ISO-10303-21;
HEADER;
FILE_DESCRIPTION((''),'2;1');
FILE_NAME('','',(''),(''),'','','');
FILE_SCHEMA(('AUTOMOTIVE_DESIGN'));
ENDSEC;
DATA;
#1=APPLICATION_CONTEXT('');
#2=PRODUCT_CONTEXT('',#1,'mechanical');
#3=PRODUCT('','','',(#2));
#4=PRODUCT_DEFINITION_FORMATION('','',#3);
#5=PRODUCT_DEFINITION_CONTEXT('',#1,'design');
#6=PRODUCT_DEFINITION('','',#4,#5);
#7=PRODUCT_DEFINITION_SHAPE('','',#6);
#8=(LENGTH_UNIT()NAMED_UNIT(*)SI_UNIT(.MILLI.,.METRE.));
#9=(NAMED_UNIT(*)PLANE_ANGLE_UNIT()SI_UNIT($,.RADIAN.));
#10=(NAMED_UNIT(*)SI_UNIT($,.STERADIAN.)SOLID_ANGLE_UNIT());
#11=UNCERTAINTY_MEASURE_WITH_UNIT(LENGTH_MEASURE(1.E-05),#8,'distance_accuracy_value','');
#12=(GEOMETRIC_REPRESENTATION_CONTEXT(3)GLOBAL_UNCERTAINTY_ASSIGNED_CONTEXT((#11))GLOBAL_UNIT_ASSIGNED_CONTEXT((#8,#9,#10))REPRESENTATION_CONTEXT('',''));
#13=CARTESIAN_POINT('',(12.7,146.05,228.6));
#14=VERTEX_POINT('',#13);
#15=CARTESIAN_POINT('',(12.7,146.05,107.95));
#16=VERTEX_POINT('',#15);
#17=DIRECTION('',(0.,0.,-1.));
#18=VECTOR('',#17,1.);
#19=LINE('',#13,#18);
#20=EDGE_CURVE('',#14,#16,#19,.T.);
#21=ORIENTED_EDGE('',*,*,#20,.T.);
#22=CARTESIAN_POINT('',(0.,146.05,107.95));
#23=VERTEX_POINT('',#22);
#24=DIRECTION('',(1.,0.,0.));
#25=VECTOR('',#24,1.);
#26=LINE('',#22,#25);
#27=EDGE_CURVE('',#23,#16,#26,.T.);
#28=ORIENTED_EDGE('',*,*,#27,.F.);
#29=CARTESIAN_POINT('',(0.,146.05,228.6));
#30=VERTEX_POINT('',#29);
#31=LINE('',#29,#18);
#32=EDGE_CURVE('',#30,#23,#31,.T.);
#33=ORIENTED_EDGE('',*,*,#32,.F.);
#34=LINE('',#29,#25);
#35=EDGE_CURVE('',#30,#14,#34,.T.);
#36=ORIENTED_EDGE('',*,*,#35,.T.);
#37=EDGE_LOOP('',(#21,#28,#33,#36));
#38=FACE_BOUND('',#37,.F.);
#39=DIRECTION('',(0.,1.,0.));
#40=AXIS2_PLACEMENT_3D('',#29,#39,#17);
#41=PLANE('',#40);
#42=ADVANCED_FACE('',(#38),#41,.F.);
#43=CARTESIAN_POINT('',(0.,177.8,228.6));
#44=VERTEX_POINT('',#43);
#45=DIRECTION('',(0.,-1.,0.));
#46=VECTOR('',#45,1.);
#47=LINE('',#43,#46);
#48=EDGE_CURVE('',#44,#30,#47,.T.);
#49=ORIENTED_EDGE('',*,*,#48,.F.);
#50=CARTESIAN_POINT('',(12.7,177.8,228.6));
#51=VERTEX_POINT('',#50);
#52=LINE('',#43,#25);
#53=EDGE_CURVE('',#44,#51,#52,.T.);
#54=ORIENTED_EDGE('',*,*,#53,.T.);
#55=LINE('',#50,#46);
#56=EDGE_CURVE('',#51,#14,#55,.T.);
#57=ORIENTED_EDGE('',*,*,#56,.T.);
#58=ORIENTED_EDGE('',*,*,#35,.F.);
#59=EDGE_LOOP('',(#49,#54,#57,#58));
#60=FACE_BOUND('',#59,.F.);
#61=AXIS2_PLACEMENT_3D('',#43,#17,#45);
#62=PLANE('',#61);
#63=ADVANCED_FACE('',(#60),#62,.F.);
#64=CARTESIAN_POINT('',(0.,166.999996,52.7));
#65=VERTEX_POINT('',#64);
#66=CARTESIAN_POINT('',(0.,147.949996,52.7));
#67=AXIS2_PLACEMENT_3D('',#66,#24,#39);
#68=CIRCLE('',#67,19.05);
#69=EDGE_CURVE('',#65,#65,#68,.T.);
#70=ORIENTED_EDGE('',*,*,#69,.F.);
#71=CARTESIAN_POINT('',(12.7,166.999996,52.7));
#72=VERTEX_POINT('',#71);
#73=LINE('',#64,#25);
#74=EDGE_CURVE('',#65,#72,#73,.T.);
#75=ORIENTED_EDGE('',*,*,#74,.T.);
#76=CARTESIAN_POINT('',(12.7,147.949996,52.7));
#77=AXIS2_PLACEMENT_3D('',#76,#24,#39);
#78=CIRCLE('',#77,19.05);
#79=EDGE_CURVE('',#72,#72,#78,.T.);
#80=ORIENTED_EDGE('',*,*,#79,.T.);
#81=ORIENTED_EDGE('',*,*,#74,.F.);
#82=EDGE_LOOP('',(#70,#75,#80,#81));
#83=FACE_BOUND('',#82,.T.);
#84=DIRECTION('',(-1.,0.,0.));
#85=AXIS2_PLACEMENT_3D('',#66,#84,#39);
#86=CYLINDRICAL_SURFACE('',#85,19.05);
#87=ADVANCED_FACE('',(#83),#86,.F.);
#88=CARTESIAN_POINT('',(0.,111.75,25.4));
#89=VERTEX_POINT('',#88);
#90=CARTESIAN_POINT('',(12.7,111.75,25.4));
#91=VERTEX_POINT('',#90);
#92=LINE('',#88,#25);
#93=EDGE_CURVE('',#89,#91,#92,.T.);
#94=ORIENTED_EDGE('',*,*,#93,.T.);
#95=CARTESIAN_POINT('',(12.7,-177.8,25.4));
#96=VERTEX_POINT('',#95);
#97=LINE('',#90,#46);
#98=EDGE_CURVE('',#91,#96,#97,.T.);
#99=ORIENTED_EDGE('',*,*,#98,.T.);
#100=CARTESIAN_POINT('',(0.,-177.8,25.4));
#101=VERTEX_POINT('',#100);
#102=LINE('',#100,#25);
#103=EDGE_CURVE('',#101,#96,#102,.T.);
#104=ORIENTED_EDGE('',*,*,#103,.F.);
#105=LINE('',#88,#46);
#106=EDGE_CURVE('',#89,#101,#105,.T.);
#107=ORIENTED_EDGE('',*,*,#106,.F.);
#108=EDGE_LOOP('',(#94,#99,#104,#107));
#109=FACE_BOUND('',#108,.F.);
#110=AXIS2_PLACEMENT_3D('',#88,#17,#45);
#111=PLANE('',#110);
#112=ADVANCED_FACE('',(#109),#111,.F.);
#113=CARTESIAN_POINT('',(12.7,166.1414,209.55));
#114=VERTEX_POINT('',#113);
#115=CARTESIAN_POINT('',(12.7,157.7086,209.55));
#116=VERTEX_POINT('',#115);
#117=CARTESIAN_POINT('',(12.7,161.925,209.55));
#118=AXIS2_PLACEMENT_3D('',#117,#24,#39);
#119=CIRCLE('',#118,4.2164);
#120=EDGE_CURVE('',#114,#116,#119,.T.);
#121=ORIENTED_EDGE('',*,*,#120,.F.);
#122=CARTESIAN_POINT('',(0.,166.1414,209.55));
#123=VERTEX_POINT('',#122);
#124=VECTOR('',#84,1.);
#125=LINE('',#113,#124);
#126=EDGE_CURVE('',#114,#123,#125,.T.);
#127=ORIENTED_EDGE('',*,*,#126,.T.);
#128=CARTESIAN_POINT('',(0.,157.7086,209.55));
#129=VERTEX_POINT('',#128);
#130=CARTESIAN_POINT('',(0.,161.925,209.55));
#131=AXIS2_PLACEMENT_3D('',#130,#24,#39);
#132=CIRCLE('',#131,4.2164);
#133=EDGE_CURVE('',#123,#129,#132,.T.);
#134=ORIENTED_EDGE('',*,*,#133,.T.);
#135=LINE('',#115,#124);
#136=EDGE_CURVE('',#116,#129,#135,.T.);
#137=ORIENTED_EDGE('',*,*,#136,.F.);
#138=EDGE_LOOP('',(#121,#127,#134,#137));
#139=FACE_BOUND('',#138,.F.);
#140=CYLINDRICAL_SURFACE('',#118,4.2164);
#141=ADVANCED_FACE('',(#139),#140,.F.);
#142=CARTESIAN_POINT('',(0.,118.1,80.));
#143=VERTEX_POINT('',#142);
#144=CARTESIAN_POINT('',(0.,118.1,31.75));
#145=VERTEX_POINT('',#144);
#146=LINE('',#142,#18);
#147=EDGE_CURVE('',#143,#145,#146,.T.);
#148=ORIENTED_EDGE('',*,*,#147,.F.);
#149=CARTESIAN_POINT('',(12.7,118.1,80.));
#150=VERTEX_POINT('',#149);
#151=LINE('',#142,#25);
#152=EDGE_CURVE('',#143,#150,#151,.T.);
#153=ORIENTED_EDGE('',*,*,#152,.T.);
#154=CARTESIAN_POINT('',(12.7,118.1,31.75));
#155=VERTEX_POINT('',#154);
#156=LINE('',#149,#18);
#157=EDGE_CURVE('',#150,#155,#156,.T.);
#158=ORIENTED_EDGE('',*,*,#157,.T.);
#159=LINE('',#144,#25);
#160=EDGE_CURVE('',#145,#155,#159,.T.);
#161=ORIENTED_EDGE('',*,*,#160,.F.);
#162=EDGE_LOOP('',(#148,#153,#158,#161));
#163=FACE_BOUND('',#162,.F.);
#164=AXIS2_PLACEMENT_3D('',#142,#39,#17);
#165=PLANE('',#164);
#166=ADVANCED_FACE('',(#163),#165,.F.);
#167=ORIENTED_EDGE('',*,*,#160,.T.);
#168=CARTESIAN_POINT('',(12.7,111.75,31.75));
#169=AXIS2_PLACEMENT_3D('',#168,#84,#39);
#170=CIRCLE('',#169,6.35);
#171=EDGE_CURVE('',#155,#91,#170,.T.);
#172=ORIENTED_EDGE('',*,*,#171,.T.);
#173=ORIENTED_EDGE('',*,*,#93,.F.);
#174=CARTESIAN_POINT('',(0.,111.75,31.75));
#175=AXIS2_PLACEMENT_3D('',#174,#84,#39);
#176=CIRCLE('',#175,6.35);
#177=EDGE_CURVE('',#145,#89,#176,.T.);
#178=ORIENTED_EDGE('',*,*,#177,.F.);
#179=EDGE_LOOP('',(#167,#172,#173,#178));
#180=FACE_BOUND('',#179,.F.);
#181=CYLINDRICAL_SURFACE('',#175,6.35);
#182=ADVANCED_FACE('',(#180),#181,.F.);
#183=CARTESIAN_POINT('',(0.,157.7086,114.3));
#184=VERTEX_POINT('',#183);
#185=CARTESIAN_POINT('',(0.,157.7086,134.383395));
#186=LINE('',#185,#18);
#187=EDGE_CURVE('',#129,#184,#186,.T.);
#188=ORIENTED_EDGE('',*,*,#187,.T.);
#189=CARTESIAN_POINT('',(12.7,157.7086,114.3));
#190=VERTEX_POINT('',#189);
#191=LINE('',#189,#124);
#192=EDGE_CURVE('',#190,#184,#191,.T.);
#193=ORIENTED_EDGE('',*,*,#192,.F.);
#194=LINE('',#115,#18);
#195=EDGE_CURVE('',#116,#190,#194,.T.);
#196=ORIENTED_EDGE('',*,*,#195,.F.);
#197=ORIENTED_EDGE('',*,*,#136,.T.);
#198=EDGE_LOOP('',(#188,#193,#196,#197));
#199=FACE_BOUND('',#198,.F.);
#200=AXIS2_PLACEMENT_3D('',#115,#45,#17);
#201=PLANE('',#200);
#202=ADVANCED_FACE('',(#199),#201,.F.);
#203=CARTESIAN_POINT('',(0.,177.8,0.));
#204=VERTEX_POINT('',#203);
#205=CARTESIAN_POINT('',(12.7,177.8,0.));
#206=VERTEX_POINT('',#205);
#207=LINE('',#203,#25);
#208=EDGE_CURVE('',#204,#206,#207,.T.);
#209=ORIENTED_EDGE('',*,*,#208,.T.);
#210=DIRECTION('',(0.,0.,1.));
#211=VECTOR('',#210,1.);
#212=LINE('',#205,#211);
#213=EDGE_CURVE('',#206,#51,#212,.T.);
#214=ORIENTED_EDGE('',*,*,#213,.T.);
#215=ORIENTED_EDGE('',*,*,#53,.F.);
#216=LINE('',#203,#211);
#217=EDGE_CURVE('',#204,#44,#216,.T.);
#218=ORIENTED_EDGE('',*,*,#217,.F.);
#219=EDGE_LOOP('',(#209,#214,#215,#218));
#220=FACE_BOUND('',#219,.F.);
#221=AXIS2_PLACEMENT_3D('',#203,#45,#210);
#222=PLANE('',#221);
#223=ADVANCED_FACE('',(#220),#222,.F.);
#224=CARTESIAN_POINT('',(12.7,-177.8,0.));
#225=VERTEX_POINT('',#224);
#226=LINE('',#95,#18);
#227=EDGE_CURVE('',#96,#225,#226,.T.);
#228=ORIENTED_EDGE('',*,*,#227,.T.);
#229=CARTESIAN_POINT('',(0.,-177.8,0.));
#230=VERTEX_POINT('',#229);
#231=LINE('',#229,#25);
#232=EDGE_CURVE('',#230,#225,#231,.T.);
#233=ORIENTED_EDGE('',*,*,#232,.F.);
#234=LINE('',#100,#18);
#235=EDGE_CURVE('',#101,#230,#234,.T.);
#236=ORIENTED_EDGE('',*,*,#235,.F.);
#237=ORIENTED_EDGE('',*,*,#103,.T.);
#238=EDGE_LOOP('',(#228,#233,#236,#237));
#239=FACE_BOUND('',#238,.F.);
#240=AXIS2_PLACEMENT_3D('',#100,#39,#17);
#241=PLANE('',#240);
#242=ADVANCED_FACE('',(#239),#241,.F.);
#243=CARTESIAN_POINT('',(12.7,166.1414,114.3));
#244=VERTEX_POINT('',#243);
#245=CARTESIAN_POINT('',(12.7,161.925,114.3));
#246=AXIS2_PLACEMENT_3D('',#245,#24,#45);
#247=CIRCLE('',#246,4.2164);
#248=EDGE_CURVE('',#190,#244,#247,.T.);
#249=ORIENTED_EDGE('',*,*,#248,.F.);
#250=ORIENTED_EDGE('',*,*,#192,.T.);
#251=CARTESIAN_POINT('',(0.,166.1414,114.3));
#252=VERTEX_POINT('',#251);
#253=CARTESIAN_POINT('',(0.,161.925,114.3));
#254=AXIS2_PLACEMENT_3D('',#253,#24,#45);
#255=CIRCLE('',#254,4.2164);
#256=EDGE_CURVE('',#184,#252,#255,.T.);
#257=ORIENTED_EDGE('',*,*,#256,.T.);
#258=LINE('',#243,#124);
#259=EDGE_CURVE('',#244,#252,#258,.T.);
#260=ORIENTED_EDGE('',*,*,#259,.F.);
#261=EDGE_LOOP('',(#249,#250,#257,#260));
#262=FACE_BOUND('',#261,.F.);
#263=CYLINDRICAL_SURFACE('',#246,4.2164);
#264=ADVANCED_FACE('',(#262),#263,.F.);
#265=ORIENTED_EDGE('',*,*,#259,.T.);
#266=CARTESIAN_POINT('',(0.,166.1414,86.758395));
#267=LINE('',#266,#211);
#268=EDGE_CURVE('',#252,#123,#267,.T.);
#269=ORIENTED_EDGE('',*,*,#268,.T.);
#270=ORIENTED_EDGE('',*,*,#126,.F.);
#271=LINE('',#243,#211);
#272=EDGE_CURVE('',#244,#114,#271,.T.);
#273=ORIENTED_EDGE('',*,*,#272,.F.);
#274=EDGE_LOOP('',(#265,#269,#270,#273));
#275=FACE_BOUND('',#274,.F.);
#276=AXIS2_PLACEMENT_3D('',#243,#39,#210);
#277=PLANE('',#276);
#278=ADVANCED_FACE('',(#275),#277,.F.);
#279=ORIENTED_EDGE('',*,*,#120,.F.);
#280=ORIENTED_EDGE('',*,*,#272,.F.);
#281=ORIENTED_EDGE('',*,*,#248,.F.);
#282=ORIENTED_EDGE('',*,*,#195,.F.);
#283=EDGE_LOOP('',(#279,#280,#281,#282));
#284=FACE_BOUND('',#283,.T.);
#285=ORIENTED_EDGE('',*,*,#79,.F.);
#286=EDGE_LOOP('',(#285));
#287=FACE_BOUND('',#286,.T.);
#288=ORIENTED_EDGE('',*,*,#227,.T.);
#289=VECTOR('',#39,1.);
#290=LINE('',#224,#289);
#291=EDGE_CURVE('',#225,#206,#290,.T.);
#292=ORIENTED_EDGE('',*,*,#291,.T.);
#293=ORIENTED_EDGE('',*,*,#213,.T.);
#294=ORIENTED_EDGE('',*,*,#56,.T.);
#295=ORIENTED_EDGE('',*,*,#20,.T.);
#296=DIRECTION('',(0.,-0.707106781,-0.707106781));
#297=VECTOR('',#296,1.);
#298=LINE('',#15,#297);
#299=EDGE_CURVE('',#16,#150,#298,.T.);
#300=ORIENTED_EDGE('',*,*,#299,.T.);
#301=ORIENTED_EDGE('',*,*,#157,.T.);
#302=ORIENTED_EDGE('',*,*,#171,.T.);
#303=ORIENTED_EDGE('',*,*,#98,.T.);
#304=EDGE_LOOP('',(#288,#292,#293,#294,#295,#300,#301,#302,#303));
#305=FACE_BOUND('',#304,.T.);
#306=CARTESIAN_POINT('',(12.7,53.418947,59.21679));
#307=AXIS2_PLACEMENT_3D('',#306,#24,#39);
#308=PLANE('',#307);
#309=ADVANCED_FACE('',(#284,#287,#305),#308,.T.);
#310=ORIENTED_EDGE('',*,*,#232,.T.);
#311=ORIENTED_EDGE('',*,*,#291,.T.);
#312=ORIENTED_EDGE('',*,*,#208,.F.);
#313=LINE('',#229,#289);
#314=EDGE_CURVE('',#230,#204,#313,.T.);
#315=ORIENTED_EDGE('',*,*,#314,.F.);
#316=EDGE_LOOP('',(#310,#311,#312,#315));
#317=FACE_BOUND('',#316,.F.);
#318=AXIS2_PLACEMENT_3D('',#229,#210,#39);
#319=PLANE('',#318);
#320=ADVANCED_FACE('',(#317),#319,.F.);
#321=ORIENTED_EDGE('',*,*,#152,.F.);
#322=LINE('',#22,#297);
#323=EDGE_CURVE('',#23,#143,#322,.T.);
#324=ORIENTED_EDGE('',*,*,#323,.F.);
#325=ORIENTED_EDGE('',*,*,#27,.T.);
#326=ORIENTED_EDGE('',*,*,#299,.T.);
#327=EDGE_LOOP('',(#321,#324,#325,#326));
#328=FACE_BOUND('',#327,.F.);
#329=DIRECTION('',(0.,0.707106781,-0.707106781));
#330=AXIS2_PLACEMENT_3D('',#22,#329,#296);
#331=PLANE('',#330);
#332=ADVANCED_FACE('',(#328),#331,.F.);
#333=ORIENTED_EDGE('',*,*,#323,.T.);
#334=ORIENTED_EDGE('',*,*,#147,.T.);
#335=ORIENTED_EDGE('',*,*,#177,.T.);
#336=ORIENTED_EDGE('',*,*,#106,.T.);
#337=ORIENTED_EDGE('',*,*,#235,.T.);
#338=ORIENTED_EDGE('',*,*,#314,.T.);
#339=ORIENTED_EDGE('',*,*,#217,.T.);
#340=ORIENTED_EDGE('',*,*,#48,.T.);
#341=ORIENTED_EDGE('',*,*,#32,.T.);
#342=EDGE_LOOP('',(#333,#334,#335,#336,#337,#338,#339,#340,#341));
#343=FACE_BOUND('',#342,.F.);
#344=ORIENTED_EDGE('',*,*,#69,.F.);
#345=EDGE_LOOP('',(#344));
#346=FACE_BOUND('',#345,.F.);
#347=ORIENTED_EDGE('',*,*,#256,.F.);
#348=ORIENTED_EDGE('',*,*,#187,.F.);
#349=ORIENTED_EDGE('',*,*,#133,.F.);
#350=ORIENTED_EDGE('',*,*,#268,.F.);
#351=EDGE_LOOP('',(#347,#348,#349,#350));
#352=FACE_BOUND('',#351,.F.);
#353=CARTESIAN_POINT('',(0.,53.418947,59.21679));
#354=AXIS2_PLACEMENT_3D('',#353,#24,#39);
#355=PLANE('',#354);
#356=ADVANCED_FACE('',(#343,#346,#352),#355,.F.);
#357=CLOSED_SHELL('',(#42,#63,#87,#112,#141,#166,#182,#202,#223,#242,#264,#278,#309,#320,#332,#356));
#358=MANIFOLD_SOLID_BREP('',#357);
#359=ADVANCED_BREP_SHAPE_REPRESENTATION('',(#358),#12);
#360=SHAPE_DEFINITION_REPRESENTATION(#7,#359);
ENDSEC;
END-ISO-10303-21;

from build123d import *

# Parameters (mm, degrees)
F0_R     = 19.05
F1_DEPTH = 12.7
F3_DEPTH = 12.701


# Not quite as in the source:
# - a feature names something its author has since deleted; it is built from what else it names


with BuildPart() as f1:
    # F0 (on Right) → F1 (new body)
    with BuildSketch(Plane.YZ):
        with BuildLine():
            Line((111.75, 25.4), (-177.8, 25.4))
            Line((-177.8, 25.4), (-177.8, 0))
            Line((-177.8, 0), (146.05, 0))
            Line((146.05, 0), (177.8, 0))
            Line((177.8, 0), (177.8, 25.4))
            Line((177.8, 25.4), (177.8, 228.6))
            Line((177.8, 228.6), (146.05, 228.6))
            Line((146.05, 228.6), (146.05, 107.95))
            Line((146.05, 107.95), (118.1, 80))
            Line((118.1, 80), (118.1, 31.75))
            ThreePointArc((118.1, 31.75), (116.2401280605, 27.2598719395), (111.75, 25.4))
        make_face()
        with Locations((147.9499962, 52.7)):
            Circle(F0_R, mode=Mode.SUBTRACT)
    extrude(amount=F1_DEPTH)

    # F2 (on face) → F3 (cut, through all)
    with BuildSketch(Plane.YZ.offset(12.7)):
        with BuildLine():
            ThreePointArc((166.1414, 209.55), (161.925, 213.7664), (157.7086, 209.55))
            Line((157.7086, 209.55), (157.7086, 114.3))
            ThreePointArc((157.7086, 114.3), (161.925, 110.0836), (166.1414, 114.3))
            Line((166.1414, 114.3), (166.1414, 209.55))
        make_face()
    extrude(amount=-F3_DEPTH, mode=Mode.SUBTRACT)


solid = f1.part
